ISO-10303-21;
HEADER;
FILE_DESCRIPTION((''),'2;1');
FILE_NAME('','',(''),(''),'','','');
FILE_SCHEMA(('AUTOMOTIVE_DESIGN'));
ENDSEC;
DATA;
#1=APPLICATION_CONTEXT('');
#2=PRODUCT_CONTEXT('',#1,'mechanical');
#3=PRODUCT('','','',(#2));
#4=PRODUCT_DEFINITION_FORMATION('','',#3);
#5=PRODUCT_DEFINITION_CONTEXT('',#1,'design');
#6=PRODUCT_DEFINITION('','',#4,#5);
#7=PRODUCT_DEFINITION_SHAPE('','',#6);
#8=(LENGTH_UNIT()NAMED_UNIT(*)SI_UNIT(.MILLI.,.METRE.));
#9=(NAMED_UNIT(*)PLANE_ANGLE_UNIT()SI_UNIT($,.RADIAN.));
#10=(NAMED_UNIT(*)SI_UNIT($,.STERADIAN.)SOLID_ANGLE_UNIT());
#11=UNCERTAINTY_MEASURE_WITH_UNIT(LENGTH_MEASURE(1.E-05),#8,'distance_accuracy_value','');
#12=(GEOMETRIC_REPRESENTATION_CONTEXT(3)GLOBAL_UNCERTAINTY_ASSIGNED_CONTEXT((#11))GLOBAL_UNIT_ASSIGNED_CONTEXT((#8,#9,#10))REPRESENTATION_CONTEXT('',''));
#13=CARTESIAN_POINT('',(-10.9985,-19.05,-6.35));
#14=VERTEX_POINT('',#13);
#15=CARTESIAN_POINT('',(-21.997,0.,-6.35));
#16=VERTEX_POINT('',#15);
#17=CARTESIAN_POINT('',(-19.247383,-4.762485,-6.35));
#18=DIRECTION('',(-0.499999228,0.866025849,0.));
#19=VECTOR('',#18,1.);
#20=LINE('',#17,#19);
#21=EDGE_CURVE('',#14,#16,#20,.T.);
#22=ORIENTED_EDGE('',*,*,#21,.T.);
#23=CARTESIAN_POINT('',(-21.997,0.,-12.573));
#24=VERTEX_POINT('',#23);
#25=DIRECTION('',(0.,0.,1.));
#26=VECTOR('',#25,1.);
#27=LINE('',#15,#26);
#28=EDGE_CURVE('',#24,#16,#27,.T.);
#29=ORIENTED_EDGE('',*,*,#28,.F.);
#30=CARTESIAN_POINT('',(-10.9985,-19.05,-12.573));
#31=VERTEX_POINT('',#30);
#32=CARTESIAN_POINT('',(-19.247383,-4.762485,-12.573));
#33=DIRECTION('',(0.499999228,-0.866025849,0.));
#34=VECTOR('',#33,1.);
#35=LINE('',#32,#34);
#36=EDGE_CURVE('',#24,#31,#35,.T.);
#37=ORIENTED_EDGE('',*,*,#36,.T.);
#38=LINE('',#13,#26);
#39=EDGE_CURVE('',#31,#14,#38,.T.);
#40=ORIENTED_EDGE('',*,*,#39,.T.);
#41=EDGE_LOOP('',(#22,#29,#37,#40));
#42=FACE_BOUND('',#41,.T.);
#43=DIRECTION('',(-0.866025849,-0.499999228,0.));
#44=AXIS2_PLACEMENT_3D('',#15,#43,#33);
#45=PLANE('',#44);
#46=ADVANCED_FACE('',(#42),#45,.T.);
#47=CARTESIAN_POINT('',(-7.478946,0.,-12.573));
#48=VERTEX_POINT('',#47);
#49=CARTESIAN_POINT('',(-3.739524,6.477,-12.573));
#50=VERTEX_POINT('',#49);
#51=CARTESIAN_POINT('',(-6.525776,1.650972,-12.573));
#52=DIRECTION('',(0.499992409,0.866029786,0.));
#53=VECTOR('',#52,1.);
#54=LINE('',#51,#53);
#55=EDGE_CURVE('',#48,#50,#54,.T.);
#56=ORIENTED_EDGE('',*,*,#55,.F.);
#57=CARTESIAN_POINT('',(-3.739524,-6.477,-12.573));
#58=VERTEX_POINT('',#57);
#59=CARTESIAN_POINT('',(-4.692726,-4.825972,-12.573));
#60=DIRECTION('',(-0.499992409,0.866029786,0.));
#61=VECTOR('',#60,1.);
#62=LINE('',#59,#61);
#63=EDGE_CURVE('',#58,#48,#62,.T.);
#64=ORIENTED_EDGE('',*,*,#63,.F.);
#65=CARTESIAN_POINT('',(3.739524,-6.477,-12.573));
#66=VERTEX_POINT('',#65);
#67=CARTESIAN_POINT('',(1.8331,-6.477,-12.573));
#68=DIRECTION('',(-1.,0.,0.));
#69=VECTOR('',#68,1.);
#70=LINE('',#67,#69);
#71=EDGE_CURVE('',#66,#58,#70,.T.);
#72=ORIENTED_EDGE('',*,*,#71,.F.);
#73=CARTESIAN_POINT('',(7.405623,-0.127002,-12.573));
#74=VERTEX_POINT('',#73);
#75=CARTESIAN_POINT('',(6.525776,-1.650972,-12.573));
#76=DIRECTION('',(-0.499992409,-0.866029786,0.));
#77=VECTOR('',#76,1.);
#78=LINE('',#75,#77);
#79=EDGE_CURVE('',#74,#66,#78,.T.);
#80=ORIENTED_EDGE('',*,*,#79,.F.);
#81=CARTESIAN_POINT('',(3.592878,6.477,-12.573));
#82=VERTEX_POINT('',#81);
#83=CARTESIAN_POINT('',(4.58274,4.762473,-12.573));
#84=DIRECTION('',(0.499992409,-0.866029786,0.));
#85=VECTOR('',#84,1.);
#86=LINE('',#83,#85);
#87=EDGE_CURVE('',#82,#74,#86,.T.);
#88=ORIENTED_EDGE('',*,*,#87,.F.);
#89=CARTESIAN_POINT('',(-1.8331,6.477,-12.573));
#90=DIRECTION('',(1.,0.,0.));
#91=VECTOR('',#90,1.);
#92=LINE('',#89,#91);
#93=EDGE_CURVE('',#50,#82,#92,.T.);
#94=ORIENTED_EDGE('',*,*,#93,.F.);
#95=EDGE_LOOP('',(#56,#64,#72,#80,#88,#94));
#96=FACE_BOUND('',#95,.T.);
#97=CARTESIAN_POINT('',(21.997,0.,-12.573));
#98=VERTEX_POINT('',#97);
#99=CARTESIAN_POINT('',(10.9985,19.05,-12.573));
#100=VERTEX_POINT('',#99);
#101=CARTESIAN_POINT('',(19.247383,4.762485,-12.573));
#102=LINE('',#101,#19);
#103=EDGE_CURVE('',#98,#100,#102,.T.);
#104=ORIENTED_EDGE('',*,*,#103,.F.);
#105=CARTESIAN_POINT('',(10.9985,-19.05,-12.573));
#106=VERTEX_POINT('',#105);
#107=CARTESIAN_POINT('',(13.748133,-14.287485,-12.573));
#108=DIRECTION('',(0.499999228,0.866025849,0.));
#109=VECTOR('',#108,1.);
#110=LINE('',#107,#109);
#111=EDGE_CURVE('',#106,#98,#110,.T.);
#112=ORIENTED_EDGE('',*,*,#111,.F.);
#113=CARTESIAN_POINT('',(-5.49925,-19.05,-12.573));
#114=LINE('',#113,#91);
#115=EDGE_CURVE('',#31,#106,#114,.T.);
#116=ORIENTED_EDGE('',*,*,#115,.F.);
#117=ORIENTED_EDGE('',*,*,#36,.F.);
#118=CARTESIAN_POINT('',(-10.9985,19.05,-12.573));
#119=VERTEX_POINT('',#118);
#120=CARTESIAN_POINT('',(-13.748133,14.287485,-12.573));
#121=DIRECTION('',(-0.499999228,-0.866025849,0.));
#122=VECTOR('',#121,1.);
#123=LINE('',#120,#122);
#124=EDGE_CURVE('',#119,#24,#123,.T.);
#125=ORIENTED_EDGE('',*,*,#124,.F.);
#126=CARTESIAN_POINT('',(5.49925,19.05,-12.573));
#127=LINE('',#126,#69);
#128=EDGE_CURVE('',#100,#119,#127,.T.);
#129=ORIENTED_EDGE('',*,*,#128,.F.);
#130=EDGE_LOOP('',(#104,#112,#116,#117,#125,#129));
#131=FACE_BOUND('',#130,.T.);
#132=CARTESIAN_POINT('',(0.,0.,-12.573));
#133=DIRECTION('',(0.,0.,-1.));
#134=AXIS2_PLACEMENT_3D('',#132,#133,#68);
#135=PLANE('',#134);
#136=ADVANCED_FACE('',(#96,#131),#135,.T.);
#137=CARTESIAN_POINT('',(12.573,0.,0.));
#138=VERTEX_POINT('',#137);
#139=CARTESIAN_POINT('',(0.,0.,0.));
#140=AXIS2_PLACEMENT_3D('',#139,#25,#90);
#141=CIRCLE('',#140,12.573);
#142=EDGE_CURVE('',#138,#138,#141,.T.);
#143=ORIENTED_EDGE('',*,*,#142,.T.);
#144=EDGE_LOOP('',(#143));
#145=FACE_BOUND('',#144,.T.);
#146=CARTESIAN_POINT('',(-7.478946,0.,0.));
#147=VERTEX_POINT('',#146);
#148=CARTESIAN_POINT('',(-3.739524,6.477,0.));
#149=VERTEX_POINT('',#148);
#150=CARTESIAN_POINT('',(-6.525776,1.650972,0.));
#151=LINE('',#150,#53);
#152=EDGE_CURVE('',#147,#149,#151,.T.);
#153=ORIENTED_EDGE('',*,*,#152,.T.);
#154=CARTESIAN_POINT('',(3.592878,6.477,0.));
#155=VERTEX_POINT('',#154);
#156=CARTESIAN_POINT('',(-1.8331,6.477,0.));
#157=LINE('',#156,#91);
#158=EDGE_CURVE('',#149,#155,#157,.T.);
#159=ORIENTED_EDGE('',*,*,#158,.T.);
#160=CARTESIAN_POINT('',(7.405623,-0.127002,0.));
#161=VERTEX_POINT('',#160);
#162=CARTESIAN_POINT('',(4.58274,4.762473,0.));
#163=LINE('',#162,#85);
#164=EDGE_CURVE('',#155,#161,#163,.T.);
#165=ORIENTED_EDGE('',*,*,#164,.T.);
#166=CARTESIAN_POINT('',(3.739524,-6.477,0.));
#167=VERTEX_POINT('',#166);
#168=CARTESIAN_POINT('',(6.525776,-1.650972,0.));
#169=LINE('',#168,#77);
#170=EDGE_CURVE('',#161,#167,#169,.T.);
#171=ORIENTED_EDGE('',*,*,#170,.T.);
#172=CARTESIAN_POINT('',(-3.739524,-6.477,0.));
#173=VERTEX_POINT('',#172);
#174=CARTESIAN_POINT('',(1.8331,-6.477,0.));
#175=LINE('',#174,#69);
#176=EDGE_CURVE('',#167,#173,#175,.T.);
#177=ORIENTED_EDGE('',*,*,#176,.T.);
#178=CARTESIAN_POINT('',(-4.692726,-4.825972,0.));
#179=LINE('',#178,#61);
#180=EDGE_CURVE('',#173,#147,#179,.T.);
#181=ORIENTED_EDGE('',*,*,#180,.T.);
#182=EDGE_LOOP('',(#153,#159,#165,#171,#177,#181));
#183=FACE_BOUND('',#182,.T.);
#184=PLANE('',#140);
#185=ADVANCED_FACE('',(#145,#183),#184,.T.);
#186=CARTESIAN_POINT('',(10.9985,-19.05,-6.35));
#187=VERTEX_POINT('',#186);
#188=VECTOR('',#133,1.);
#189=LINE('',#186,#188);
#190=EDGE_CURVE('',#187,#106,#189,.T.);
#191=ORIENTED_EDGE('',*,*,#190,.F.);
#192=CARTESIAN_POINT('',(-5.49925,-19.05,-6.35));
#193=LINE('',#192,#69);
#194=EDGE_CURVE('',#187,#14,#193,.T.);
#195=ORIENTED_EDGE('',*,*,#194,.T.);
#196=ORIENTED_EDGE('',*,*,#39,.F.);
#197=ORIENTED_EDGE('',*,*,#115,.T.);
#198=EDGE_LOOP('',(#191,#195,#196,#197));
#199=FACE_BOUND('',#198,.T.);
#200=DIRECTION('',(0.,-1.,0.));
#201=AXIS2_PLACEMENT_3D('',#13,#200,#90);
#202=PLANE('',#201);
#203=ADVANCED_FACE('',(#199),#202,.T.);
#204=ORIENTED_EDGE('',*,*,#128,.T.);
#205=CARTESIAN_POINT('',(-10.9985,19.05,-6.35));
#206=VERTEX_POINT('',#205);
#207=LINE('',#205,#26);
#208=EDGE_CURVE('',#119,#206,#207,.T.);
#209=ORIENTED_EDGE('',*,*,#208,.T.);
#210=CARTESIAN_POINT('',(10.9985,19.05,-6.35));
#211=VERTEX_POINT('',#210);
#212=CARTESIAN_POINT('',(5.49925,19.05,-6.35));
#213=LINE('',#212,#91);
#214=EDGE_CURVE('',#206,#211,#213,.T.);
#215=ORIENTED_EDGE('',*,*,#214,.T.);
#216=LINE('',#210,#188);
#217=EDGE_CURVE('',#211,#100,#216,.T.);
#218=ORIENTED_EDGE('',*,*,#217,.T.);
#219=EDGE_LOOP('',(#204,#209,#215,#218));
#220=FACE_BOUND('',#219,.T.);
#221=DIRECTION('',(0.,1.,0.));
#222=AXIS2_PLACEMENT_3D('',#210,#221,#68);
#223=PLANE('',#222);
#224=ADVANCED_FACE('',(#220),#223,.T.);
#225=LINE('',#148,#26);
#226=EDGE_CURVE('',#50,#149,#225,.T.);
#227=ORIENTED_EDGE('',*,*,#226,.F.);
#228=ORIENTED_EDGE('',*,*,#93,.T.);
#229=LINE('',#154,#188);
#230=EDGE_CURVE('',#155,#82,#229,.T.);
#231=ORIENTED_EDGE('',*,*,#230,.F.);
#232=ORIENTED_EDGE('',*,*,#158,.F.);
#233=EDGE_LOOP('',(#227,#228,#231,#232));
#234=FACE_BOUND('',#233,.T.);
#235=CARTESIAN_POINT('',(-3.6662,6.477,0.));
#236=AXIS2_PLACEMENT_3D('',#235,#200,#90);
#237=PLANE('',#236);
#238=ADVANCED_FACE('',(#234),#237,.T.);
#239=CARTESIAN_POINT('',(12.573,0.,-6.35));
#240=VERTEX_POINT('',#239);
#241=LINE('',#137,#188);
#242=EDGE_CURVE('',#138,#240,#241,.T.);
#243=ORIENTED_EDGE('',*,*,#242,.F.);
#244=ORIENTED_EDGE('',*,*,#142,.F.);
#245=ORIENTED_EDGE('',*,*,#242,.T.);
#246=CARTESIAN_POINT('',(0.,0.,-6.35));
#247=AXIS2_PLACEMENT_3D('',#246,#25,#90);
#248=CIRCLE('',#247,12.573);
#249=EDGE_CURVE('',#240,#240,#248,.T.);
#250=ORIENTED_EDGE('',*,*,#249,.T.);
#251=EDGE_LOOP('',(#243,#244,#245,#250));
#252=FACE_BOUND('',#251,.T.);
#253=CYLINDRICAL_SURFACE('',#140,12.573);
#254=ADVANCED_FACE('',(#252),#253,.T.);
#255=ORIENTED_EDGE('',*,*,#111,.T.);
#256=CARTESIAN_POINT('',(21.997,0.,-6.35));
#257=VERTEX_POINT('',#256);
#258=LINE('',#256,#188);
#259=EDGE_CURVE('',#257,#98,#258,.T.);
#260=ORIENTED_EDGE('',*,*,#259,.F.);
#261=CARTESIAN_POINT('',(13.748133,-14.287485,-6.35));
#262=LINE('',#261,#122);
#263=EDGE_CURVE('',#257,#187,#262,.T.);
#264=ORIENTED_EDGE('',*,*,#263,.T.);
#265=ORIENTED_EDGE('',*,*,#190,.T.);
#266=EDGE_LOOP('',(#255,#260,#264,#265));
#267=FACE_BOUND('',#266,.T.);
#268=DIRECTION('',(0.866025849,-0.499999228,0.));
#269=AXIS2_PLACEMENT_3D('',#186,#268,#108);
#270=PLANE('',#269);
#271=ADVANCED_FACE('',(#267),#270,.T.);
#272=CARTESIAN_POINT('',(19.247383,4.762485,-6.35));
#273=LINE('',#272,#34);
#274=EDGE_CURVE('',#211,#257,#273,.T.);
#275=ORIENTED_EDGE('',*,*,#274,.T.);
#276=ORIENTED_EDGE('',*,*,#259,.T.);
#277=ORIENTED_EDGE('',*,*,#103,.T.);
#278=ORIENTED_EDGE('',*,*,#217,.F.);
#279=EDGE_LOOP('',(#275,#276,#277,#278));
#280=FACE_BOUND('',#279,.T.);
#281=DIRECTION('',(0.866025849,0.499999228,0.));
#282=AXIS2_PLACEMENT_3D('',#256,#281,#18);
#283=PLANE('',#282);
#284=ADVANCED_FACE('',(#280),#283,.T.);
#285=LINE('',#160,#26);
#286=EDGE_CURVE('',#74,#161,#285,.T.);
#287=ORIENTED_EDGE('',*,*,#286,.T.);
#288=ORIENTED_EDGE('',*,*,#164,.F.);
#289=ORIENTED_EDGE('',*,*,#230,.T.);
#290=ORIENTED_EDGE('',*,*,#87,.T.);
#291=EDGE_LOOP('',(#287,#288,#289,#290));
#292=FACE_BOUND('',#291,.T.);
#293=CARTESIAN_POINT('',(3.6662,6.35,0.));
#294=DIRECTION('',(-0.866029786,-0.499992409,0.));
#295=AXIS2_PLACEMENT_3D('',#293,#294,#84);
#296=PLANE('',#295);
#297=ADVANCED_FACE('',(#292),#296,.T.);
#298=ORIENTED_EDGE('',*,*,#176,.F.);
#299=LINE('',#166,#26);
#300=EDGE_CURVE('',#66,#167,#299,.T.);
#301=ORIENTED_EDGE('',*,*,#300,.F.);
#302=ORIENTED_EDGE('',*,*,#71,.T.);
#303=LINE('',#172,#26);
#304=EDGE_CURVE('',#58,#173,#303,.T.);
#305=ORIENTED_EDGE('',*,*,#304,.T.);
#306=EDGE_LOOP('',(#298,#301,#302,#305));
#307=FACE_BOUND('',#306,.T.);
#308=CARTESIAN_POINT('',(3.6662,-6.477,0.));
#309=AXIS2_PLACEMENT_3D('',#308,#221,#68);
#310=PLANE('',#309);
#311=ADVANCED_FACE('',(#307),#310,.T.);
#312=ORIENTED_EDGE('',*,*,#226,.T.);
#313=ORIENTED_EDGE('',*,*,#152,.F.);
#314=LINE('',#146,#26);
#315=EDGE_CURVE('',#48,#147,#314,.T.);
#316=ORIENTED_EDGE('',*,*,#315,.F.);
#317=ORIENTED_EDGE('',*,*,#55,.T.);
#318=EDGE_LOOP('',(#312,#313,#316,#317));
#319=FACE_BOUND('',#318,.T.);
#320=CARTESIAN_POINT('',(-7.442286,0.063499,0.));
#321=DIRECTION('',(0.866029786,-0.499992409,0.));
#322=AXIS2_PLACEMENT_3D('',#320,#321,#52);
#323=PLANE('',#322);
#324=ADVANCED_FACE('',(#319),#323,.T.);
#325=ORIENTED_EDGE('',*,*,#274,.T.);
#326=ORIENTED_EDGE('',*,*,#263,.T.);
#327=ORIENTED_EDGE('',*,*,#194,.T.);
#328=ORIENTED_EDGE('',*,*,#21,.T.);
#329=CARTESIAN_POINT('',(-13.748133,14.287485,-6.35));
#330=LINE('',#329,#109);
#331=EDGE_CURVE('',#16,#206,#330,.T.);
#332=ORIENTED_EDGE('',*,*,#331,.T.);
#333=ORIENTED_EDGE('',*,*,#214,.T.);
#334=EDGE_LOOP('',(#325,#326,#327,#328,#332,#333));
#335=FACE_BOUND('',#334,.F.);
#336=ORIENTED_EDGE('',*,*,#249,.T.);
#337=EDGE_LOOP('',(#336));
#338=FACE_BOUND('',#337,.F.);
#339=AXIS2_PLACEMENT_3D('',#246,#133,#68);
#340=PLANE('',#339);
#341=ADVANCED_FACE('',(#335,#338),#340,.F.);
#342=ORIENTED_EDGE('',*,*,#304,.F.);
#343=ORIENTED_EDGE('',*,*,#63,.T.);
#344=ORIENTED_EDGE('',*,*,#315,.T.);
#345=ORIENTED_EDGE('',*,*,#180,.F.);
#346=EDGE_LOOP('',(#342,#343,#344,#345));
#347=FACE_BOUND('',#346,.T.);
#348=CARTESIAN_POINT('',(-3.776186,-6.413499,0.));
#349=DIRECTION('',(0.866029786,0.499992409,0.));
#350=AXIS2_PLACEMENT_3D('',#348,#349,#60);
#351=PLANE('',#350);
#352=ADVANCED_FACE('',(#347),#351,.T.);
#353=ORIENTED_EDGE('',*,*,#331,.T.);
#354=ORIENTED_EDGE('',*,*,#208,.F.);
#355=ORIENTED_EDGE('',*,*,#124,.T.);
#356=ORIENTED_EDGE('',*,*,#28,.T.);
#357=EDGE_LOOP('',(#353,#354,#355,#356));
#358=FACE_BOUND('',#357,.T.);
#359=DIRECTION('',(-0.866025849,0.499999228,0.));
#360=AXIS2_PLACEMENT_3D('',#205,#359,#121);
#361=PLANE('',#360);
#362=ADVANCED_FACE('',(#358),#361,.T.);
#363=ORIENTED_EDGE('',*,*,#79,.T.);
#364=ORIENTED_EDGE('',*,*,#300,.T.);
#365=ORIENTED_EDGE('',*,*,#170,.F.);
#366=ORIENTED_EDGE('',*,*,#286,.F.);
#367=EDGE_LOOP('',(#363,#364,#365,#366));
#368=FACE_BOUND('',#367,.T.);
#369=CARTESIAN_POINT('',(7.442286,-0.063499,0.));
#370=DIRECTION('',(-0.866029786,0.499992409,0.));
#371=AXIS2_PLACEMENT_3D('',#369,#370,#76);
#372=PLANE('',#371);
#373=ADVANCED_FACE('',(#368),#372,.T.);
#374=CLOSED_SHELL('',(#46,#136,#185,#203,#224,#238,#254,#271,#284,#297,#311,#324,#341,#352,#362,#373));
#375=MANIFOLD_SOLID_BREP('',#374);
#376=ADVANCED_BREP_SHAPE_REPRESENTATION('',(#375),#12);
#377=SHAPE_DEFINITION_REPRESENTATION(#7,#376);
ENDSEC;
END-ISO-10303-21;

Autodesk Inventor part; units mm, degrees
ref_plane "YZ Plane" through (0, 0, 0) normal (1, 0, 0) x (0, 1, 0)
ref_plane "XZ Plane" through (0, 0, 0) normal (0, 1, 0) x (-1, 0, 0)
ref_plane "XY Plane" through (0, 0, 0) normal (0, 0, 1) x (1, 0, 0)
sketch "Sketch1" plane through (0, 0, 0) normal (0, 0, 1) x (1, 0, 0)
  line L0 (3.6662, 6.35) -> (7.3323, 0)
  line L1 (7.3323, 0) -> (3.6662, -6.35)
  line L2 (3.6662, -6.35) -> (-3.6662, -6.35)
  line L3 (-3.6662, -6.35) -> (-7.3323, 0)
  line L4 (-7.3323, 0) -> (-3.6662, 6.35)
  line L5 (-3.6662, 6.35) -> (3.6662, 6.35)
  circle A0 centre (0, 0) radius 12.7
  circle A1 centre (0, 0) radius 7.3323 construction
  dimension "d0" = 12.7
  dimension "d2" = 25.4
  dimension "d3" = 5.3677
extrude "Extrusion1" add sketch "Sketch1" against normal blind 6.35
sketch "Sketch2" plane through (0, 0, -6.35) normal (0, 0, -1) x (-1, 0, 0)
  line L0 (7.3323, 0) -> (3.6662, -6.35) projected
  line L1 (3.6662, -6.35) -> (-3.6662, -6.35)
  line L2 (-3.6662, -6.35) -> (-7.3323, 0)
  line L3 (-7.3323, 0) -> (-3.6662, 6.35)
  line L4 (-3.6662, 6.35) -> (3.6662, 6.35)
  line L5 (3.6662, 6.35) -> (7.3323, 0)
  line L6 (7.3323, 0) -> (3.6662, -6.35)
  line L7 (-10.9985, 19.05) -> (10.9985, 19.05)
  line L8 (10.9985, 19.05) -> (21.997, 0)
  line L9 (21.997, 0) -> (10.9985, -19.05)
  line L10 (10.9985, -19.05) -> (-10.9985, -19.05)
  line L11 (-10.9985, -19.05) -> (-21.997, 0)
  line L12 (-21.997, 0) -> (-10.9985, 19.05)
  point P0 (0, 0)
  point P1 (0, 0)
  point P2 (0, 0)
  dimension "d7" = 12.7
  dimension "d10" = 38.1
extrude "Extrusion3" add sketch "Sketch2" along normal blind 6.35
thicken "Thicken Internal Hex Hold" operation add thickness 0.127 both sides no extend neighbours yes toward (0, 1, 0) faces at (1.2221, 6.35, -8.4667) (-4.8882, 4.2333, -8.4667) (1.2221, 14.8167, -12.7) (6.1103, -2.1167, -8.4667) (1.2221, -6.35, -8.4667) (-4.8882, -4.2333, -4.2333)
thicken "Reduce Size of Bushing Fitting" operation add thickness 0.127 both sides no extend neighbours yes toward (-0.9967573, 0.0804666, 0) faces at (12.6588, -1.0219, -4.2333)
equation "\"d13\" = printSpacing"
equation "\"d14\" = printSpacing"
equation "\"d15\" = printSpacing"
equation "\"d16\" = printSpacing"
equation "\"hexSize\" = 12.7"
equation "\"printSpacing\" = 0.127"
properties part number "1_2x1-hexBushing" material "PC/ABS Plastic"
